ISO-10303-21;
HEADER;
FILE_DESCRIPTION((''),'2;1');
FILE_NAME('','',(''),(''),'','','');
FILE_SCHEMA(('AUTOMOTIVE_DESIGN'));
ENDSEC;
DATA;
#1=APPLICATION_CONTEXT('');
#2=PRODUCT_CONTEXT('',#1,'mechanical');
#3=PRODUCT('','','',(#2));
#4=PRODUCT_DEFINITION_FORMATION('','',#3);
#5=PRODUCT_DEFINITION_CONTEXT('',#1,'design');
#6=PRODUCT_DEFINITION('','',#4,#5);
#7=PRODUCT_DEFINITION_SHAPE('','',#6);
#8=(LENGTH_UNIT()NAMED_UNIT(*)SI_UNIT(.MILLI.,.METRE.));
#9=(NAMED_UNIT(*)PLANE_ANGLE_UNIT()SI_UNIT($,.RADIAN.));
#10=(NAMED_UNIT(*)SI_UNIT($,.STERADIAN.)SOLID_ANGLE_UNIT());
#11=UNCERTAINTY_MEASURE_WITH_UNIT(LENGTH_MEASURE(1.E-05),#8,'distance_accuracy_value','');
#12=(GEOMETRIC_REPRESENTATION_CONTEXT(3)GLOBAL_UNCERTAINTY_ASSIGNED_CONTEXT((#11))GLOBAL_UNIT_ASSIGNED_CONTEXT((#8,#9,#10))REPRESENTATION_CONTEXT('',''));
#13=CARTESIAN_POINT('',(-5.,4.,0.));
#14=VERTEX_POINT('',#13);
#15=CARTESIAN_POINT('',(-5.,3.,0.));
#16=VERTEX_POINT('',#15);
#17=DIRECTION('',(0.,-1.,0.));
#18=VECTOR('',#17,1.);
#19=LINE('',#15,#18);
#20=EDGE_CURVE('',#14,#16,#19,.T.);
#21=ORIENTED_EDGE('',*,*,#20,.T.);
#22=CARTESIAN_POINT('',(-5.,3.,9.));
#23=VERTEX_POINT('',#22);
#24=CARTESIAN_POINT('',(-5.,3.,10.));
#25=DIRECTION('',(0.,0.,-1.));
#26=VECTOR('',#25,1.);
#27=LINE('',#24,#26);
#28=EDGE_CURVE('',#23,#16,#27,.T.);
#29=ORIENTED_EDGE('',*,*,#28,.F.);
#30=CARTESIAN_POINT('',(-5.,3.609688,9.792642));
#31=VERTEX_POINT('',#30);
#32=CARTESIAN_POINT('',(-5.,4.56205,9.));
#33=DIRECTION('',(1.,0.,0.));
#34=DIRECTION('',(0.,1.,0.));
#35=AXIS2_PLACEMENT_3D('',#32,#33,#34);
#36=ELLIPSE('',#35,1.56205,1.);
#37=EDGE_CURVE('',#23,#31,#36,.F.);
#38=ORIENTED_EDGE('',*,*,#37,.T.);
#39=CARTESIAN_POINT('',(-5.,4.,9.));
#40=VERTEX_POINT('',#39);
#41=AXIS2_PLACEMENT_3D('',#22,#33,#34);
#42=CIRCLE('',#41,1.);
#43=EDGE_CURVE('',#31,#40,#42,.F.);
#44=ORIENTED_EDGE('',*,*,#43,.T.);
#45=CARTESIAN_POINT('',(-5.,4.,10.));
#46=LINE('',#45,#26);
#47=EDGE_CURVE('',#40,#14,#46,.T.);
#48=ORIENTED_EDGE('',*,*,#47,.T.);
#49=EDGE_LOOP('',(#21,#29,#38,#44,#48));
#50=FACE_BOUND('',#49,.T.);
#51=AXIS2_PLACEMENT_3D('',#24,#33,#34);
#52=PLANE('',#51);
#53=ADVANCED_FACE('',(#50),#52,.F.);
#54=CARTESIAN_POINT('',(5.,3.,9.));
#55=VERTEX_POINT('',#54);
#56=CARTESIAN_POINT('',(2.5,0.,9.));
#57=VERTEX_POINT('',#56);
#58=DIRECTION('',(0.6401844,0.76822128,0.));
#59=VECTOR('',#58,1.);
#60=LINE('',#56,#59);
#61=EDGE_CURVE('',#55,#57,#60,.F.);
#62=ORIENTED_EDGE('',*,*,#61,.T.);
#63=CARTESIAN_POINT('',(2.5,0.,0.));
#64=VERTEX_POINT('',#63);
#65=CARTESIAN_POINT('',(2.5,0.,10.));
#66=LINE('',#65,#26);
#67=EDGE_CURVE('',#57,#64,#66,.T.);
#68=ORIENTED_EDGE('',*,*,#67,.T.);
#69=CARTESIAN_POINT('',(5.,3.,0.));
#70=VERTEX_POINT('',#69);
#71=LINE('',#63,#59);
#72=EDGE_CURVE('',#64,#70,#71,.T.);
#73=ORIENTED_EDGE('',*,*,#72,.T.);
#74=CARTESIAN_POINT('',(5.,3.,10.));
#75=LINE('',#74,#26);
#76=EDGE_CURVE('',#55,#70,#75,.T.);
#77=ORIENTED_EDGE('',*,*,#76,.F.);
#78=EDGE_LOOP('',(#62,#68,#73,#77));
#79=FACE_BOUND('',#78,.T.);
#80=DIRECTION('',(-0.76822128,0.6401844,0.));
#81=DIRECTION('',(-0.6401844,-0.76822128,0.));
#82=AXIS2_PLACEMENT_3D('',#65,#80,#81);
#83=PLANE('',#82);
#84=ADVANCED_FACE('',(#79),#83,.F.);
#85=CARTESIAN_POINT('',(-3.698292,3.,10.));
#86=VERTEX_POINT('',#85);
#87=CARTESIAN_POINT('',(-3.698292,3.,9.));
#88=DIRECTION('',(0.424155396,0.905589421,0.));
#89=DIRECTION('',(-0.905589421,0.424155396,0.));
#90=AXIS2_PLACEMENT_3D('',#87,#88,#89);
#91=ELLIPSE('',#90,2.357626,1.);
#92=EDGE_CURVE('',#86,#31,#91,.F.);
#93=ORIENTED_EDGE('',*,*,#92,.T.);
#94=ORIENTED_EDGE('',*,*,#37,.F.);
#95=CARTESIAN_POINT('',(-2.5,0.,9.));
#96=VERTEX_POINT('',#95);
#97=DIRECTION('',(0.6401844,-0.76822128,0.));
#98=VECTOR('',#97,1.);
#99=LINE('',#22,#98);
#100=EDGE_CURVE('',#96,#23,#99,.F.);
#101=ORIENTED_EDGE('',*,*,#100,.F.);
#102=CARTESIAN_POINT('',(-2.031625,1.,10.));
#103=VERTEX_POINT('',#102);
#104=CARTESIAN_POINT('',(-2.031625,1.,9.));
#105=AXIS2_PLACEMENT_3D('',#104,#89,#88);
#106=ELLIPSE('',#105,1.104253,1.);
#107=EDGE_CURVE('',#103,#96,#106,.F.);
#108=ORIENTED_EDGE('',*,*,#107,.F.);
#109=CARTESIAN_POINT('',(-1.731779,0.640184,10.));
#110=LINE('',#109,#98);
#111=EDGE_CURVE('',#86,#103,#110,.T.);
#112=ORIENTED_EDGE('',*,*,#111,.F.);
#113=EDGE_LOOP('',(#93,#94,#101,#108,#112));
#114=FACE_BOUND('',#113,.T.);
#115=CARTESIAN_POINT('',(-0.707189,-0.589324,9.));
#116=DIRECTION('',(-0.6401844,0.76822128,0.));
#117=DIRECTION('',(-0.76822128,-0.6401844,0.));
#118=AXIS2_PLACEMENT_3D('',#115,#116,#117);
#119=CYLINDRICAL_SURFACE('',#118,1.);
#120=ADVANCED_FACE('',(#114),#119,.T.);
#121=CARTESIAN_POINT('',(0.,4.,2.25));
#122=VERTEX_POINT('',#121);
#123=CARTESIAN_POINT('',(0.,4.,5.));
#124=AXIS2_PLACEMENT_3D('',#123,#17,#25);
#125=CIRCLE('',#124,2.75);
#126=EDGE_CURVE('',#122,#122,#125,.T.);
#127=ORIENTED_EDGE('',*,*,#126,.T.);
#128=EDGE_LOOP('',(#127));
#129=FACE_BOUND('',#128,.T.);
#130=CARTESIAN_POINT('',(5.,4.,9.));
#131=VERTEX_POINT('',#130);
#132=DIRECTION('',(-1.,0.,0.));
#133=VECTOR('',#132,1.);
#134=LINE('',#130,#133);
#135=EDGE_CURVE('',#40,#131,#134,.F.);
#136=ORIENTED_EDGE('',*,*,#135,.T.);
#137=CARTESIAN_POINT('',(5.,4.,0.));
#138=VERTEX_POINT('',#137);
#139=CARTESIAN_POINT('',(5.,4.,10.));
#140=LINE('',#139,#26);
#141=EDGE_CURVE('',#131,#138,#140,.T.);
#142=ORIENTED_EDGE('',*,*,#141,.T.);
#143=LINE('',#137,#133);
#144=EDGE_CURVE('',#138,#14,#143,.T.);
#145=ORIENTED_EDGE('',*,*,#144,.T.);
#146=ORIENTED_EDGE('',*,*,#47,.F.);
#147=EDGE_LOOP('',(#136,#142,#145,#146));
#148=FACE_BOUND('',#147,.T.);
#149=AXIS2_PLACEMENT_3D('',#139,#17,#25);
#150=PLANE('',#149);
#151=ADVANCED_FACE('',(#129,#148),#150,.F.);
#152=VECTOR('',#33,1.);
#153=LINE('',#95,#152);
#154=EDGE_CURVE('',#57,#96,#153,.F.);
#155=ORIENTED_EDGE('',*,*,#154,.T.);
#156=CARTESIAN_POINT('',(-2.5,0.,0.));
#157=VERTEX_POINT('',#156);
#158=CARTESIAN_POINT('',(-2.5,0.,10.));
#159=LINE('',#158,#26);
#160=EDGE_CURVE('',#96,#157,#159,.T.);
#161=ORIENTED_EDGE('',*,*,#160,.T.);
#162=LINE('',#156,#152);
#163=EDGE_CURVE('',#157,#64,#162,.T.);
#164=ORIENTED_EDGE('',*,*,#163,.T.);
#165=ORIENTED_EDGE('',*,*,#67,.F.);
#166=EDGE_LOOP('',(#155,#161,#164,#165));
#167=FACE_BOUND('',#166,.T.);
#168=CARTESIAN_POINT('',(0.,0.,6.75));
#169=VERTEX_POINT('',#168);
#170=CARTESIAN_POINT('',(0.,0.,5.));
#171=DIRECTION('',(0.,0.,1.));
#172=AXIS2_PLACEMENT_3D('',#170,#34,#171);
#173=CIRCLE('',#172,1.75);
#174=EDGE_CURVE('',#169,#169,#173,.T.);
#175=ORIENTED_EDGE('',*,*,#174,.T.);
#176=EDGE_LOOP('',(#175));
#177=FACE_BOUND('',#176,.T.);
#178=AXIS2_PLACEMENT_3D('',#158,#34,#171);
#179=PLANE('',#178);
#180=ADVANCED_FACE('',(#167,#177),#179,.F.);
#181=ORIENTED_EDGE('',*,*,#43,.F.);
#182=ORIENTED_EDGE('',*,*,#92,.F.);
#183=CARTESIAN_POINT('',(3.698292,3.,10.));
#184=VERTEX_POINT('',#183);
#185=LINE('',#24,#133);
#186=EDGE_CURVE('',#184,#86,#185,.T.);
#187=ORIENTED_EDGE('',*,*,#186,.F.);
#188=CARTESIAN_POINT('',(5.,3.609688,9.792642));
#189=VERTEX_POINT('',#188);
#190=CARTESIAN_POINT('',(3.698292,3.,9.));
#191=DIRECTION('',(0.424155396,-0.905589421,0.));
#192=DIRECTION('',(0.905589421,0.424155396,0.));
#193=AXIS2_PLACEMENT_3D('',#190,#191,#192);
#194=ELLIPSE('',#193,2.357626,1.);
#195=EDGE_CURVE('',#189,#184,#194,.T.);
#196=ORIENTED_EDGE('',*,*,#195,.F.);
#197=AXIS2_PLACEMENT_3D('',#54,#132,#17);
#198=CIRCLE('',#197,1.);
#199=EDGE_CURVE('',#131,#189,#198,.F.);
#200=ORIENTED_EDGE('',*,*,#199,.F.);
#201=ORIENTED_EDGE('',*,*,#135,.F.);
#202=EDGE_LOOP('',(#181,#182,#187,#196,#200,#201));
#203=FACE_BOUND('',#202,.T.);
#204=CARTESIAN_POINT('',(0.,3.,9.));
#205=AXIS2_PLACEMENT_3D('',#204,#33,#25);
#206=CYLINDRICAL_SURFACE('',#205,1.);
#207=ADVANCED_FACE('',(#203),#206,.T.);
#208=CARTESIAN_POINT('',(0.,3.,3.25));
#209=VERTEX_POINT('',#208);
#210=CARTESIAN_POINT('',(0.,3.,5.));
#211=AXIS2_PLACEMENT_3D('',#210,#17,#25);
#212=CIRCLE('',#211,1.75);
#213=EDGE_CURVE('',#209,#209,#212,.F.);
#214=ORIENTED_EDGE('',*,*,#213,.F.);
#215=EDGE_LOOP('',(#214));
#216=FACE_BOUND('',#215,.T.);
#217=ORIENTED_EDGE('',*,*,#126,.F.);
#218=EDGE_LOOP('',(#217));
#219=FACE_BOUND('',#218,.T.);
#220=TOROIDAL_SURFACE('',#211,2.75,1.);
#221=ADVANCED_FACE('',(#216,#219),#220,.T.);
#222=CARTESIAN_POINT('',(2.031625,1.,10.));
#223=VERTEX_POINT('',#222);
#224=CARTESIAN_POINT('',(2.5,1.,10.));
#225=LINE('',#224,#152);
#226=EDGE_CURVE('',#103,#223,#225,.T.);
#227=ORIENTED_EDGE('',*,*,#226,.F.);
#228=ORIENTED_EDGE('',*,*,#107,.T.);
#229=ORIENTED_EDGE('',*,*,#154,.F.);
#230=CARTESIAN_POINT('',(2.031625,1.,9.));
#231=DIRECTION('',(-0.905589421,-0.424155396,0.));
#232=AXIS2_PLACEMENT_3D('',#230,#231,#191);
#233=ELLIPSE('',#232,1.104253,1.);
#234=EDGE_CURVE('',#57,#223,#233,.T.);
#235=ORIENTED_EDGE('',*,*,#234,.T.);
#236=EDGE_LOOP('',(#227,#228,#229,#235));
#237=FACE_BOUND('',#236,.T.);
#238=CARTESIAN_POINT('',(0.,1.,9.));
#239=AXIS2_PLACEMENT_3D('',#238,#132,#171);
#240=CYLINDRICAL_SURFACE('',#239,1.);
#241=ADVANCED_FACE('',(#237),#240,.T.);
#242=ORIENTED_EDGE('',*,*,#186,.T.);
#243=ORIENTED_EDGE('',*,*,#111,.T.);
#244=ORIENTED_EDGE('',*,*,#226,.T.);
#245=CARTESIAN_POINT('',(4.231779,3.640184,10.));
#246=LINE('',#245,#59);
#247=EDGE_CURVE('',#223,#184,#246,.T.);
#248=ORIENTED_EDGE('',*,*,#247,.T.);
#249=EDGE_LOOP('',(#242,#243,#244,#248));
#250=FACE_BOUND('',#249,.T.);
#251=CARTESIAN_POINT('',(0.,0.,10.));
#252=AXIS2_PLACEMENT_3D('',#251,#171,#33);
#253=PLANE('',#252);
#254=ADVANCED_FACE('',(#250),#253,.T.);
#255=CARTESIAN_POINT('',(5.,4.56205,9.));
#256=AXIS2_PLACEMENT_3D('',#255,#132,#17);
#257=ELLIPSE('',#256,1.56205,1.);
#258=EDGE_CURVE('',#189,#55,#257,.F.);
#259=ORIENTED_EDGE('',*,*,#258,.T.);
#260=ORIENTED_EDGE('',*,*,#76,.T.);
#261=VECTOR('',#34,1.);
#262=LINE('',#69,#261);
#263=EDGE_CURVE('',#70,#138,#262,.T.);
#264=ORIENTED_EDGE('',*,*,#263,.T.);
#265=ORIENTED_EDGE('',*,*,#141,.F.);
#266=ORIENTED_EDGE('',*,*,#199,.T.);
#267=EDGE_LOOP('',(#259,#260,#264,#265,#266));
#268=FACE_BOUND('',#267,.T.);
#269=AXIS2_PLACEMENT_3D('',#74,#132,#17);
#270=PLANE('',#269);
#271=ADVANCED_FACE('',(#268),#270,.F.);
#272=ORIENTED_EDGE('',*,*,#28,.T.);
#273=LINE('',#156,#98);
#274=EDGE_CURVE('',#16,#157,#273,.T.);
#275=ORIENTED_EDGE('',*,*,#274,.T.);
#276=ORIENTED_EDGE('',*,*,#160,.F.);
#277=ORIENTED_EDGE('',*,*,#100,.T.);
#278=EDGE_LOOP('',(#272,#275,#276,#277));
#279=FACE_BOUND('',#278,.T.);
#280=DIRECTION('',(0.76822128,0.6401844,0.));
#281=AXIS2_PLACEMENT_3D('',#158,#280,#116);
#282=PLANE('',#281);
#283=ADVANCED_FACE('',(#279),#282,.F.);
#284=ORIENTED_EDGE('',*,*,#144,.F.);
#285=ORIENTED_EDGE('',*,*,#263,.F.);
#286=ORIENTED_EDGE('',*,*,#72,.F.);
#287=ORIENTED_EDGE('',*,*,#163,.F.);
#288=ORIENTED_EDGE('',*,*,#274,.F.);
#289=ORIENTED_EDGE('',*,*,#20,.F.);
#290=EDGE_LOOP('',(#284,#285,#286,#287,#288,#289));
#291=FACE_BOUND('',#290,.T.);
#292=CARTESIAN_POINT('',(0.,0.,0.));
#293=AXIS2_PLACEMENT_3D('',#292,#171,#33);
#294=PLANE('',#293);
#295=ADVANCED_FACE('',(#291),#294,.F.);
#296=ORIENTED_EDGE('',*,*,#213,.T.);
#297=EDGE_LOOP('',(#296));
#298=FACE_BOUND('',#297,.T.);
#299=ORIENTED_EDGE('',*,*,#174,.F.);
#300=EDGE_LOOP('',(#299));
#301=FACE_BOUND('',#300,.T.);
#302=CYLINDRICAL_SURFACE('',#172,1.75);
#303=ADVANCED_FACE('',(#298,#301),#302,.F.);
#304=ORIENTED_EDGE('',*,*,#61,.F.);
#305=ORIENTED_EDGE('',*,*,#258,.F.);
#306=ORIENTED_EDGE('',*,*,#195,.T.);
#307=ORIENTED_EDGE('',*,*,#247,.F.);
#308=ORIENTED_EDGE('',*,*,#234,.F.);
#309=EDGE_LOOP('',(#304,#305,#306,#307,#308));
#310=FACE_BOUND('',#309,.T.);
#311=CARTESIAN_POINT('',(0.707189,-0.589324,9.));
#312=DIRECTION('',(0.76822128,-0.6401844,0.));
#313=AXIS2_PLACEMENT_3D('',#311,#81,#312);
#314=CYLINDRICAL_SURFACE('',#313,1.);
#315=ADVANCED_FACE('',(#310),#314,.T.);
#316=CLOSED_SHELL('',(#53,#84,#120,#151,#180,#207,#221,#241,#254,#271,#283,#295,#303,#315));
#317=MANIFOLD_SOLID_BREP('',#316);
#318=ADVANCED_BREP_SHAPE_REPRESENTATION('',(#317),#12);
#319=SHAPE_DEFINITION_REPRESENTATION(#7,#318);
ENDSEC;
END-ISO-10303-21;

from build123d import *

# Parameters (mm, degrees)
BOSS_EXTRUDE1_DEPTH = 10
SKETCH3_R           = 1.75
CUT_EXTRUDE1_DEPTH  = 12.874342087
FILLET2_R           = 1


with BuildPart() as part:
    # Sketch1 → Boss-Extrude1 (new body)
    with BuildSketch(Plane.XY):
        Polygon((-2.5, 0), (2.5, 0), (5, 3), (5, 4), (-5, 4), (-5, 3), align=None)
    extrude(amount=BOSS_EXTRUDE1_DEPTH)

    # Sketch3 → Cut-Extrude1 (cut, through all)
    with BuildSketch(Plane(origin=(0, 4, 0), x_dir=(1, 0, 0), z_dir=(0, 1, 0))):
        with Locations(Location((0, -5, 0), (0, 0, 270))):
            Circle(SKETCH3_R)
    extrude(amount=-CUT_EXTRUDE1_DEPTH, mode=Mode.SUBTRACT)

    # Fillet2
    # the kernel refuses this fillet: 1 mm, written as the material it takes off along each edge
    with BuildSketch(Plane(origin=(-5, 0, 10), x_dir=(0, 0, -1), z_dir=(1, 0, 0))) as fillet2_piece_1:
        with BuildLine():
            CenterArc((FILLET2_R, FILLET2_R), FILLET2_R, 180, 90)
            Line((0, FILLET2_R), (0, 0))
            Line((0, 0), (FILLET2_R, 0))
        make_face()
    extrude(amount=10, mode=Mode.SUBTRACT)
    with BuildSketch(Plane(origin=(0.899539001, -1.920553199, 10), x_dir=(-0.768221279597376, 0.6401843996644797, 0), z_dir=(0.6401843996644797, 0.768221279597376, 0))) as fillet2_piece_2:
        with BuildLine():
            CenterArc((FILLET2_R, -FILLET2_R), FILLET2_R, 90, 90)
            Line((0, -FILLET2_R), (0, 0))
            Line((0, 0), (FILLET2_R, 0))
        make_face()
    extrude(amount=8.905124838, mode=Mode.SUBTRACT)
    with BuildSketch(Plane(origin=(-6.600460999, 4.920553199, 10), x_dir=(0, 0, -1), z_dir=(0.6401843996644797, -0.768221279597376, 0))) as fillet2_piece_3:
        with BuildLine():
            CenterArc((FILLET2_R, FILLET2_R), FILLET2_R, 180, 90)
            Line((0, FILLET2_R), (0, 0))
            Line((0, 0), (FILLET2_R, 0))
        make_face()
    extrude(amount=8.905124838, mode=Mode.SUBTRACT)
    with BuildSketch(Plane(origin=(7.5, 4, 10), x_dir=(0, -1, 0), z_dir=(-1, 0, 0))) as fillet2_piece_4:
        with BuildLine():
            CenterArc((FILLET2_R, -FILLET2_R), FILLET2_R, 90, 90)
            Line((0, -FILLET2_R), (0, 0))
            Line((0, 0), (FILLET2_R, 0))
        make_face()
    extrude(amount=15, mode=Mode.SUBTRACT)
    with BuildSketch(Plane(origin=(0, 4, 5), x_dir=(0, 0, 1), z_dir=(-1, 0, 0))) as fillet2_piece_5:
        with BuildLine():
            CenterArc((1.75 + FILLET2_R, -FILLET2_R), FILLET2_R, 90, 90)
            Line((1.75 + FILLET2_R, 0), (1.75, 0))
            Line((1.75, 0), (1.75, -FILLET2_R))
        make_face()
    revolve(axis=Axis((0, 4, 5), (0, 1, 0)), mode=Mode.SUBTRACT)


solid = part.part
